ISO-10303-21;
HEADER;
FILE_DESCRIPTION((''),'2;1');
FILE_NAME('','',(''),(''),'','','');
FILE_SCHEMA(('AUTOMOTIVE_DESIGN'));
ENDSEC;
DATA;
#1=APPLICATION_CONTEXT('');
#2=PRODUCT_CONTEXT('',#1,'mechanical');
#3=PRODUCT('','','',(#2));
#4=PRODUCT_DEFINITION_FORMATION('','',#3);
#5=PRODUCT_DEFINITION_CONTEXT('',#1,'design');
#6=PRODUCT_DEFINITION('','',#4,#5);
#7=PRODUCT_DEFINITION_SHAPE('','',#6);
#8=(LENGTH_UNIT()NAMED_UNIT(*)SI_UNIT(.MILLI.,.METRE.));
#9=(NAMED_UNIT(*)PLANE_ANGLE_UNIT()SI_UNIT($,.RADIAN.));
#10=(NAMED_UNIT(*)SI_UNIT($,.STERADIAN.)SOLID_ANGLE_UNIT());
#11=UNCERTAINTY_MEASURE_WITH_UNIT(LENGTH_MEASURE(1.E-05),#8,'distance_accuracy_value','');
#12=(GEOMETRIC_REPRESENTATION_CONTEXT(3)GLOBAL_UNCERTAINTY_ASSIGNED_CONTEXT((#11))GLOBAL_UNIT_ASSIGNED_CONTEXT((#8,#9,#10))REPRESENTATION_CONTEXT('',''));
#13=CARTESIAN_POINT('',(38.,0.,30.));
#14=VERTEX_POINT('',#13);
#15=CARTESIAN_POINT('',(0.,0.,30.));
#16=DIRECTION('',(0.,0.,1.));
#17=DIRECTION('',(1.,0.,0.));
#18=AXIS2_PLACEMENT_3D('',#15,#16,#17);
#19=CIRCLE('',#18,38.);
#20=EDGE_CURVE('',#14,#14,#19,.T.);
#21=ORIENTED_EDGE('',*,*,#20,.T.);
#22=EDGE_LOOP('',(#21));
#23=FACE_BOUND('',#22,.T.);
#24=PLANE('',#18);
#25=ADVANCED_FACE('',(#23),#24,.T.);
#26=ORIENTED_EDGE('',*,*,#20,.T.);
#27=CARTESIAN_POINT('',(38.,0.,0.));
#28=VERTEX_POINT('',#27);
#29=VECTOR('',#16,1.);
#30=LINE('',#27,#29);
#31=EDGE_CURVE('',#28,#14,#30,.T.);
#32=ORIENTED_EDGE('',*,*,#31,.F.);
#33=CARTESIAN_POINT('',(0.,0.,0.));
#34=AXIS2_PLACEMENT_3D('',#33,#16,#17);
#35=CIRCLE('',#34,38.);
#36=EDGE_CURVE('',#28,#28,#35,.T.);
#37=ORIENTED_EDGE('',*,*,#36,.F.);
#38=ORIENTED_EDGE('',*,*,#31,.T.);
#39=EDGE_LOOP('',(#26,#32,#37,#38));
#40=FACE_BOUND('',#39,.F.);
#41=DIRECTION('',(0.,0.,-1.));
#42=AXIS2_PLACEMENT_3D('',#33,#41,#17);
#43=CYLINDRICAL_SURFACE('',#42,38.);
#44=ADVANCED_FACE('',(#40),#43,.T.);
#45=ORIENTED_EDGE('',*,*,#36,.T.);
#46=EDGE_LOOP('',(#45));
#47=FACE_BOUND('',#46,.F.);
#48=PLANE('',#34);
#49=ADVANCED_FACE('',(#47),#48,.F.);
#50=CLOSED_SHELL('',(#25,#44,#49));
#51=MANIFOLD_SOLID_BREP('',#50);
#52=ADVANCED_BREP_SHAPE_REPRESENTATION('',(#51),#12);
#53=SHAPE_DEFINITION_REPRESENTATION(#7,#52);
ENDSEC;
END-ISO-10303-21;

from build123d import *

# Parameters (mm, degrees)
F0_R     = 38
F1_DEPTH = 30


# Not quite as in the source:
# - a feature names something its author has since deleted; it is built from what else it names


with BuildPart() as f1:
    # F0 (on Top) → F1 (new body)
    with BuildSketch(Plane.XY):
        Circle(F0_R)
    extrude(amount=F1_DEPTH)


solid = f1.part
